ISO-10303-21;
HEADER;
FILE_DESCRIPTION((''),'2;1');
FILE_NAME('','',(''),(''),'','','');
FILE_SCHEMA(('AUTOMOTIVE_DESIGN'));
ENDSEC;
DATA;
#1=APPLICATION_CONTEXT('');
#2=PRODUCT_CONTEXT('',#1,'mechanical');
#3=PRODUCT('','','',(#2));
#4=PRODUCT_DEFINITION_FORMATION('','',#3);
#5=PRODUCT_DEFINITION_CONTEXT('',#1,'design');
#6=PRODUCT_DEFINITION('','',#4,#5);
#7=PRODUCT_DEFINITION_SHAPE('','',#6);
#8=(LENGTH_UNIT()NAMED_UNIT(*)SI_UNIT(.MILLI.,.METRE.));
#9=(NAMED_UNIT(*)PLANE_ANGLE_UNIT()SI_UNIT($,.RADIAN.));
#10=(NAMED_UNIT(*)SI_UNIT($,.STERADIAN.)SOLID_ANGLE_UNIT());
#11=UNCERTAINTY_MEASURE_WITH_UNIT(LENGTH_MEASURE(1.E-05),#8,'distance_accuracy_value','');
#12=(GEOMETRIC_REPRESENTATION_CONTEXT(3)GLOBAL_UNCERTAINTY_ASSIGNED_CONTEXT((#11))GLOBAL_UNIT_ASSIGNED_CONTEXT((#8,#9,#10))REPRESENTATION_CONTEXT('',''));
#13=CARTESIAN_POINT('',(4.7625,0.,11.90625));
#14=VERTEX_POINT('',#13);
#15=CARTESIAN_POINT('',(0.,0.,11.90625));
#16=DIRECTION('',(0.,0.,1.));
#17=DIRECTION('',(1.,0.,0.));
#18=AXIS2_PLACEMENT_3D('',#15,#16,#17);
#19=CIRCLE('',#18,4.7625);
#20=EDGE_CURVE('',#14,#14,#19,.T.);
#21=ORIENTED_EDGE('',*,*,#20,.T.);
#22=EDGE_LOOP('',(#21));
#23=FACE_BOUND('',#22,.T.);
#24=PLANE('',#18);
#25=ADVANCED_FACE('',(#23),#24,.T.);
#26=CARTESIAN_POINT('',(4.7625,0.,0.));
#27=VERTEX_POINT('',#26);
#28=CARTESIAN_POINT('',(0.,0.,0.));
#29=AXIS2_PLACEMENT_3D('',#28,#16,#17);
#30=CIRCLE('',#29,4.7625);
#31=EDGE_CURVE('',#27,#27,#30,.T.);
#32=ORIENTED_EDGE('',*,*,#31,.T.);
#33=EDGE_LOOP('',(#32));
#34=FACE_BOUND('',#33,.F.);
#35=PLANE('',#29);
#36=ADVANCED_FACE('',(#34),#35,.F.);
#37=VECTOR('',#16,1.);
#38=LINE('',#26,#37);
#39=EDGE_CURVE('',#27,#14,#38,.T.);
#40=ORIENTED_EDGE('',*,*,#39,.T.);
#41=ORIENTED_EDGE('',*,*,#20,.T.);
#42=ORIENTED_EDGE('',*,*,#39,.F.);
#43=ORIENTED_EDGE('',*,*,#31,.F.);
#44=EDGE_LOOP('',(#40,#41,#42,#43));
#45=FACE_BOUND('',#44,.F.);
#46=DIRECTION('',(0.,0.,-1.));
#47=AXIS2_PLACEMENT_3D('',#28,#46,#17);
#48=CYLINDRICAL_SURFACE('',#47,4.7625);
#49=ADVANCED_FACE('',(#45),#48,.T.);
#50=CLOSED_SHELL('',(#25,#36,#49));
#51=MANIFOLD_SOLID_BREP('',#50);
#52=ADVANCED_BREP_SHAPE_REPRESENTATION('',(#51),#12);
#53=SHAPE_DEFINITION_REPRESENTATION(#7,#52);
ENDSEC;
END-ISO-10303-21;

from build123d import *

# Parameters (mm, degrees)
F0_R     = 4.7625
F1_DEPTH = 11.90625


# Not quite as in the source:
# - a length typed as a fraction of an inch, garbled in the dataset ("3 / 203.2 mm" for 3/8 in), is restored


with BuildPart() as f1:
    # F0 (on Top) → F1 (new body)
    with BuildSketch(Plane.XY):
        Circle(F0_R)
    extrude(amount=F1_DEPTH)


solid = f1.part
